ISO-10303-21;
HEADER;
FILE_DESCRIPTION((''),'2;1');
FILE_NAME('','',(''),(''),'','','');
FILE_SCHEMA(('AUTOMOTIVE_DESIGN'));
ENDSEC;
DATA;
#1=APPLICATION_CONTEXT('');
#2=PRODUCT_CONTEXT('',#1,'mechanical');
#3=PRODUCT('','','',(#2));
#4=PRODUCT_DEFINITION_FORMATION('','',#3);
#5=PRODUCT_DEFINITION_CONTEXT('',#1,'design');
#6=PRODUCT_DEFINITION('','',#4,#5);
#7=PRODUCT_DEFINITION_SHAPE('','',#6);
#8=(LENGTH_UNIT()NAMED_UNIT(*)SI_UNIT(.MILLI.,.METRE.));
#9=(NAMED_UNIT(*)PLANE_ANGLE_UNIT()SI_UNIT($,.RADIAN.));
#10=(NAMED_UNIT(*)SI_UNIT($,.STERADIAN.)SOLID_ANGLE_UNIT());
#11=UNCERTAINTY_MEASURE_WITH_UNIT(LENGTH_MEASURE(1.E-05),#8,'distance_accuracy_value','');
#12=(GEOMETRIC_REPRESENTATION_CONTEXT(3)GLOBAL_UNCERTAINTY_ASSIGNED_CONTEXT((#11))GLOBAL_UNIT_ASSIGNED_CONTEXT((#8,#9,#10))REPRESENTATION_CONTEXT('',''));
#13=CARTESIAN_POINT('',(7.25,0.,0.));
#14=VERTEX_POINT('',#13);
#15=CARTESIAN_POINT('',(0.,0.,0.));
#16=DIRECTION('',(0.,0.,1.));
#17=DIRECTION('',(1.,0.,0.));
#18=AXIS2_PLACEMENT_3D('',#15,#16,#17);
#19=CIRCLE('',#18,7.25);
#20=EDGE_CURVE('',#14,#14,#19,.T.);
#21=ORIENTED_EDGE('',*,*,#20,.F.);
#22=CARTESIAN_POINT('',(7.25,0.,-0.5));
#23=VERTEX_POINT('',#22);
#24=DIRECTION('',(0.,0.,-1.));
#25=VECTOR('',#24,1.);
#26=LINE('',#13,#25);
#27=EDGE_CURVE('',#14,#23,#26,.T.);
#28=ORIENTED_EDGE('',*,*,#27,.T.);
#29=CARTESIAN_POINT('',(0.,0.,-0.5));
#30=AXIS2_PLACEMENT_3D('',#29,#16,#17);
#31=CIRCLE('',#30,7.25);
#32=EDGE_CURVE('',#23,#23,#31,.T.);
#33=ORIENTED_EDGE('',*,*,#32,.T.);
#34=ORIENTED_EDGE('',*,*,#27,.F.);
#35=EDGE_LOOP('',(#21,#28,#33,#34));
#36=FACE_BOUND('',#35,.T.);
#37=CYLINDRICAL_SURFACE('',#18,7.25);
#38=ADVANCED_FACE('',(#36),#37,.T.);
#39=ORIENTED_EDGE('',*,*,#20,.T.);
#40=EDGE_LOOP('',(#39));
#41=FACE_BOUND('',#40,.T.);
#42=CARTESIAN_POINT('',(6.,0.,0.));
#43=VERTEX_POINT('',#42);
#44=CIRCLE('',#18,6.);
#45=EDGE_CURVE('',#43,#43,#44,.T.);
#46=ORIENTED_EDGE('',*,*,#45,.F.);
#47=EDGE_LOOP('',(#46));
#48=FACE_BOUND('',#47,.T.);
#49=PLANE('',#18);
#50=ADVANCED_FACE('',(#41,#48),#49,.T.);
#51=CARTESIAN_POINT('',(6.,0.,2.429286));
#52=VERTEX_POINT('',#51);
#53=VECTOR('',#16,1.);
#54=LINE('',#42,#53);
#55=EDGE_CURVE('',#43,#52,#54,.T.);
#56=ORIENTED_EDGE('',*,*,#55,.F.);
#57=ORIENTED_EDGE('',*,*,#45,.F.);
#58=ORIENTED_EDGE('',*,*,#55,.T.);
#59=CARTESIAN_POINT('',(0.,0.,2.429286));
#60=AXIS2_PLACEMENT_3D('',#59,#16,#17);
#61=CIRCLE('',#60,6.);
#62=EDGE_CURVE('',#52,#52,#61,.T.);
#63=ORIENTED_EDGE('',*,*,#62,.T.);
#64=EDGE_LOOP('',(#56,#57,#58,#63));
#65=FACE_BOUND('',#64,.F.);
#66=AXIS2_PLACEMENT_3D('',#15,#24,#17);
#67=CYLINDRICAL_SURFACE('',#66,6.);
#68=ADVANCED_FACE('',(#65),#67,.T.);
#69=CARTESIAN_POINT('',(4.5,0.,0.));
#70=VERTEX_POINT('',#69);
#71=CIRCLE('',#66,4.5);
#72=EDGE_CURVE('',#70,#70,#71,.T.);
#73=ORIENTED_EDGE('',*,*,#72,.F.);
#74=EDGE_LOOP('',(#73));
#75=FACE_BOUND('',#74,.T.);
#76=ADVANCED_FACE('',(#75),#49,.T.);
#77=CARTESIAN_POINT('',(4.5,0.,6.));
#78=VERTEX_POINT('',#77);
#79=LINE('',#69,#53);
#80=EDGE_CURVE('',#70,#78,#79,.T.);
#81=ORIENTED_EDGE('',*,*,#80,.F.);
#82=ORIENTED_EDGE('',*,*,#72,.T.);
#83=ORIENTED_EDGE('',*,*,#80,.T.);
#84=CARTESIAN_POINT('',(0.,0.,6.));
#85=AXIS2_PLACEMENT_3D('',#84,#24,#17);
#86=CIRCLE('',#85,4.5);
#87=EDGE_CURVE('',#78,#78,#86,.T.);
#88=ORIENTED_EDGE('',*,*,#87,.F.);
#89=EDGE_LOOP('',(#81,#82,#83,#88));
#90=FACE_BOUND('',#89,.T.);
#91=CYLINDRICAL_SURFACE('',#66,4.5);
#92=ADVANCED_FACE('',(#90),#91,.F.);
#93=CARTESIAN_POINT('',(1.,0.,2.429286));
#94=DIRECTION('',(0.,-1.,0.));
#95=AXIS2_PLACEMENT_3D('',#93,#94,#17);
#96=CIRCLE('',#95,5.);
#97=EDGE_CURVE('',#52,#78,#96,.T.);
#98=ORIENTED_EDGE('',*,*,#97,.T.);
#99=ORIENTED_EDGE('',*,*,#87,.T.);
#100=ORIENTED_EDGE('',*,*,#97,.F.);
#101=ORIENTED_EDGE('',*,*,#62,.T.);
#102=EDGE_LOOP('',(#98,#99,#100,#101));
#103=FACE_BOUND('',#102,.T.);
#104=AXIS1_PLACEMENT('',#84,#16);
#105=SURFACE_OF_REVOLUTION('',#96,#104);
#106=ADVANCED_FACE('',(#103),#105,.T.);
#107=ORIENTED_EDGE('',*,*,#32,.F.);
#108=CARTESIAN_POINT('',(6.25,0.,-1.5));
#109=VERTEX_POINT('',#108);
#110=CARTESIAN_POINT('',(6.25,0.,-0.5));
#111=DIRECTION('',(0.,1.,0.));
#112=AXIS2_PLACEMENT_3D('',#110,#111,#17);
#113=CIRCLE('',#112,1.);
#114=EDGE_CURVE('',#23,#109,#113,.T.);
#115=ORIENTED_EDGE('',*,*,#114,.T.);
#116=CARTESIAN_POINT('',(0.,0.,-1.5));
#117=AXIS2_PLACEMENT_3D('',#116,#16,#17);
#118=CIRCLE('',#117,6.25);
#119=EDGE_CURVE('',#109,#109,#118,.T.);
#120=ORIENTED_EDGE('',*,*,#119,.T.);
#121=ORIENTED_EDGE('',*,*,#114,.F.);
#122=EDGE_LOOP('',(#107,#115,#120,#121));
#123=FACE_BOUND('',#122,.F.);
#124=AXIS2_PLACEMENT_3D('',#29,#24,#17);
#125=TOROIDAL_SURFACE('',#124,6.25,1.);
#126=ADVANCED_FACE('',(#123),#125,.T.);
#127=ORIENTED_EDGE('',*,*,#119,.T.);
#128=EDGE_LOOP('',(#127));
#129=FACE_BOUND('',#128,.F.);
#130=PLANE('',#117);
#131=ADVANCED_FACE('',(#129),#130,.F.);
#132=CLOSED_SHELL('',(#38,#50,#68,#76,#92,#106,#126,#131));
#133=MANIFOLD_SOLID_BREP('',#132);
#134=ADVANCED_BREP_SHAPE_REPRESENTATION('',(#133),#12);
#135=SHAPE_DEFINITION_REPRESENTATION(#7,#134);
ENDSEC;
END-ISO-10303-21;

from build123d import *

# Parameters (mm, degrees)
F0_R     = 7.25
F1_DEPTH = 1.5
F2_R     = 6
F3_DEPTH = 6
F4_T     = -1.5
F5_R     = 1


# Not quite as in the source:
# - a fillet or chamfer that OpenCascade refuses, or shapes differently, is made with other operations: its cross-section is extruded or revolved along the edge and cut away or added


with BuildPart() as f1:
    # F0 (on Top) → F1 (new body)
    with BuildSketch(Plane.XY):
        Circle(F0_R)
    extrude(amount=-F1_DEPTH)

    # F2 (on face) → F3 (join)
    with BuildSketch(Plane.XY):
        Circle(F2_R)
    extrude(amount=F3_DEPTH)

    # F4
    f4_openings = [f1.faces().sort_by_distance(p)[0] for p in [
        (0, 0, 6),
    ]]
    offset(amount=F4_T, openings=f4_openings, kind=Kind.INTERSECTION)

    # F5
    f5_edges = [f1.edges().sort_by_distance(p)[0] for p in [
        (-7.25, 0, -1.5),
    ]]
    fillet(f5_edges, radius=F5_R)

    # F6: fillet of radius 5 on 1 edges, made by hand

    # F6_s1 → F6_t2 (revolve, cut)
    with BuildSketch(Plane.XZ):
        with BuildLine():
            ThreePointArc((6, 2.4292857857), (5.6097722286, 4.3657774588), (4.5, 6))
            Line((4.5, 6), (6, 6))
            Line((6, 6), (6, 2.4292857857))
        make_face()
    revolve(axis=Axis((0, 0, 6), (0, 0, 1)), mode=Mode.SUBTRACT)


solid = f1.part
